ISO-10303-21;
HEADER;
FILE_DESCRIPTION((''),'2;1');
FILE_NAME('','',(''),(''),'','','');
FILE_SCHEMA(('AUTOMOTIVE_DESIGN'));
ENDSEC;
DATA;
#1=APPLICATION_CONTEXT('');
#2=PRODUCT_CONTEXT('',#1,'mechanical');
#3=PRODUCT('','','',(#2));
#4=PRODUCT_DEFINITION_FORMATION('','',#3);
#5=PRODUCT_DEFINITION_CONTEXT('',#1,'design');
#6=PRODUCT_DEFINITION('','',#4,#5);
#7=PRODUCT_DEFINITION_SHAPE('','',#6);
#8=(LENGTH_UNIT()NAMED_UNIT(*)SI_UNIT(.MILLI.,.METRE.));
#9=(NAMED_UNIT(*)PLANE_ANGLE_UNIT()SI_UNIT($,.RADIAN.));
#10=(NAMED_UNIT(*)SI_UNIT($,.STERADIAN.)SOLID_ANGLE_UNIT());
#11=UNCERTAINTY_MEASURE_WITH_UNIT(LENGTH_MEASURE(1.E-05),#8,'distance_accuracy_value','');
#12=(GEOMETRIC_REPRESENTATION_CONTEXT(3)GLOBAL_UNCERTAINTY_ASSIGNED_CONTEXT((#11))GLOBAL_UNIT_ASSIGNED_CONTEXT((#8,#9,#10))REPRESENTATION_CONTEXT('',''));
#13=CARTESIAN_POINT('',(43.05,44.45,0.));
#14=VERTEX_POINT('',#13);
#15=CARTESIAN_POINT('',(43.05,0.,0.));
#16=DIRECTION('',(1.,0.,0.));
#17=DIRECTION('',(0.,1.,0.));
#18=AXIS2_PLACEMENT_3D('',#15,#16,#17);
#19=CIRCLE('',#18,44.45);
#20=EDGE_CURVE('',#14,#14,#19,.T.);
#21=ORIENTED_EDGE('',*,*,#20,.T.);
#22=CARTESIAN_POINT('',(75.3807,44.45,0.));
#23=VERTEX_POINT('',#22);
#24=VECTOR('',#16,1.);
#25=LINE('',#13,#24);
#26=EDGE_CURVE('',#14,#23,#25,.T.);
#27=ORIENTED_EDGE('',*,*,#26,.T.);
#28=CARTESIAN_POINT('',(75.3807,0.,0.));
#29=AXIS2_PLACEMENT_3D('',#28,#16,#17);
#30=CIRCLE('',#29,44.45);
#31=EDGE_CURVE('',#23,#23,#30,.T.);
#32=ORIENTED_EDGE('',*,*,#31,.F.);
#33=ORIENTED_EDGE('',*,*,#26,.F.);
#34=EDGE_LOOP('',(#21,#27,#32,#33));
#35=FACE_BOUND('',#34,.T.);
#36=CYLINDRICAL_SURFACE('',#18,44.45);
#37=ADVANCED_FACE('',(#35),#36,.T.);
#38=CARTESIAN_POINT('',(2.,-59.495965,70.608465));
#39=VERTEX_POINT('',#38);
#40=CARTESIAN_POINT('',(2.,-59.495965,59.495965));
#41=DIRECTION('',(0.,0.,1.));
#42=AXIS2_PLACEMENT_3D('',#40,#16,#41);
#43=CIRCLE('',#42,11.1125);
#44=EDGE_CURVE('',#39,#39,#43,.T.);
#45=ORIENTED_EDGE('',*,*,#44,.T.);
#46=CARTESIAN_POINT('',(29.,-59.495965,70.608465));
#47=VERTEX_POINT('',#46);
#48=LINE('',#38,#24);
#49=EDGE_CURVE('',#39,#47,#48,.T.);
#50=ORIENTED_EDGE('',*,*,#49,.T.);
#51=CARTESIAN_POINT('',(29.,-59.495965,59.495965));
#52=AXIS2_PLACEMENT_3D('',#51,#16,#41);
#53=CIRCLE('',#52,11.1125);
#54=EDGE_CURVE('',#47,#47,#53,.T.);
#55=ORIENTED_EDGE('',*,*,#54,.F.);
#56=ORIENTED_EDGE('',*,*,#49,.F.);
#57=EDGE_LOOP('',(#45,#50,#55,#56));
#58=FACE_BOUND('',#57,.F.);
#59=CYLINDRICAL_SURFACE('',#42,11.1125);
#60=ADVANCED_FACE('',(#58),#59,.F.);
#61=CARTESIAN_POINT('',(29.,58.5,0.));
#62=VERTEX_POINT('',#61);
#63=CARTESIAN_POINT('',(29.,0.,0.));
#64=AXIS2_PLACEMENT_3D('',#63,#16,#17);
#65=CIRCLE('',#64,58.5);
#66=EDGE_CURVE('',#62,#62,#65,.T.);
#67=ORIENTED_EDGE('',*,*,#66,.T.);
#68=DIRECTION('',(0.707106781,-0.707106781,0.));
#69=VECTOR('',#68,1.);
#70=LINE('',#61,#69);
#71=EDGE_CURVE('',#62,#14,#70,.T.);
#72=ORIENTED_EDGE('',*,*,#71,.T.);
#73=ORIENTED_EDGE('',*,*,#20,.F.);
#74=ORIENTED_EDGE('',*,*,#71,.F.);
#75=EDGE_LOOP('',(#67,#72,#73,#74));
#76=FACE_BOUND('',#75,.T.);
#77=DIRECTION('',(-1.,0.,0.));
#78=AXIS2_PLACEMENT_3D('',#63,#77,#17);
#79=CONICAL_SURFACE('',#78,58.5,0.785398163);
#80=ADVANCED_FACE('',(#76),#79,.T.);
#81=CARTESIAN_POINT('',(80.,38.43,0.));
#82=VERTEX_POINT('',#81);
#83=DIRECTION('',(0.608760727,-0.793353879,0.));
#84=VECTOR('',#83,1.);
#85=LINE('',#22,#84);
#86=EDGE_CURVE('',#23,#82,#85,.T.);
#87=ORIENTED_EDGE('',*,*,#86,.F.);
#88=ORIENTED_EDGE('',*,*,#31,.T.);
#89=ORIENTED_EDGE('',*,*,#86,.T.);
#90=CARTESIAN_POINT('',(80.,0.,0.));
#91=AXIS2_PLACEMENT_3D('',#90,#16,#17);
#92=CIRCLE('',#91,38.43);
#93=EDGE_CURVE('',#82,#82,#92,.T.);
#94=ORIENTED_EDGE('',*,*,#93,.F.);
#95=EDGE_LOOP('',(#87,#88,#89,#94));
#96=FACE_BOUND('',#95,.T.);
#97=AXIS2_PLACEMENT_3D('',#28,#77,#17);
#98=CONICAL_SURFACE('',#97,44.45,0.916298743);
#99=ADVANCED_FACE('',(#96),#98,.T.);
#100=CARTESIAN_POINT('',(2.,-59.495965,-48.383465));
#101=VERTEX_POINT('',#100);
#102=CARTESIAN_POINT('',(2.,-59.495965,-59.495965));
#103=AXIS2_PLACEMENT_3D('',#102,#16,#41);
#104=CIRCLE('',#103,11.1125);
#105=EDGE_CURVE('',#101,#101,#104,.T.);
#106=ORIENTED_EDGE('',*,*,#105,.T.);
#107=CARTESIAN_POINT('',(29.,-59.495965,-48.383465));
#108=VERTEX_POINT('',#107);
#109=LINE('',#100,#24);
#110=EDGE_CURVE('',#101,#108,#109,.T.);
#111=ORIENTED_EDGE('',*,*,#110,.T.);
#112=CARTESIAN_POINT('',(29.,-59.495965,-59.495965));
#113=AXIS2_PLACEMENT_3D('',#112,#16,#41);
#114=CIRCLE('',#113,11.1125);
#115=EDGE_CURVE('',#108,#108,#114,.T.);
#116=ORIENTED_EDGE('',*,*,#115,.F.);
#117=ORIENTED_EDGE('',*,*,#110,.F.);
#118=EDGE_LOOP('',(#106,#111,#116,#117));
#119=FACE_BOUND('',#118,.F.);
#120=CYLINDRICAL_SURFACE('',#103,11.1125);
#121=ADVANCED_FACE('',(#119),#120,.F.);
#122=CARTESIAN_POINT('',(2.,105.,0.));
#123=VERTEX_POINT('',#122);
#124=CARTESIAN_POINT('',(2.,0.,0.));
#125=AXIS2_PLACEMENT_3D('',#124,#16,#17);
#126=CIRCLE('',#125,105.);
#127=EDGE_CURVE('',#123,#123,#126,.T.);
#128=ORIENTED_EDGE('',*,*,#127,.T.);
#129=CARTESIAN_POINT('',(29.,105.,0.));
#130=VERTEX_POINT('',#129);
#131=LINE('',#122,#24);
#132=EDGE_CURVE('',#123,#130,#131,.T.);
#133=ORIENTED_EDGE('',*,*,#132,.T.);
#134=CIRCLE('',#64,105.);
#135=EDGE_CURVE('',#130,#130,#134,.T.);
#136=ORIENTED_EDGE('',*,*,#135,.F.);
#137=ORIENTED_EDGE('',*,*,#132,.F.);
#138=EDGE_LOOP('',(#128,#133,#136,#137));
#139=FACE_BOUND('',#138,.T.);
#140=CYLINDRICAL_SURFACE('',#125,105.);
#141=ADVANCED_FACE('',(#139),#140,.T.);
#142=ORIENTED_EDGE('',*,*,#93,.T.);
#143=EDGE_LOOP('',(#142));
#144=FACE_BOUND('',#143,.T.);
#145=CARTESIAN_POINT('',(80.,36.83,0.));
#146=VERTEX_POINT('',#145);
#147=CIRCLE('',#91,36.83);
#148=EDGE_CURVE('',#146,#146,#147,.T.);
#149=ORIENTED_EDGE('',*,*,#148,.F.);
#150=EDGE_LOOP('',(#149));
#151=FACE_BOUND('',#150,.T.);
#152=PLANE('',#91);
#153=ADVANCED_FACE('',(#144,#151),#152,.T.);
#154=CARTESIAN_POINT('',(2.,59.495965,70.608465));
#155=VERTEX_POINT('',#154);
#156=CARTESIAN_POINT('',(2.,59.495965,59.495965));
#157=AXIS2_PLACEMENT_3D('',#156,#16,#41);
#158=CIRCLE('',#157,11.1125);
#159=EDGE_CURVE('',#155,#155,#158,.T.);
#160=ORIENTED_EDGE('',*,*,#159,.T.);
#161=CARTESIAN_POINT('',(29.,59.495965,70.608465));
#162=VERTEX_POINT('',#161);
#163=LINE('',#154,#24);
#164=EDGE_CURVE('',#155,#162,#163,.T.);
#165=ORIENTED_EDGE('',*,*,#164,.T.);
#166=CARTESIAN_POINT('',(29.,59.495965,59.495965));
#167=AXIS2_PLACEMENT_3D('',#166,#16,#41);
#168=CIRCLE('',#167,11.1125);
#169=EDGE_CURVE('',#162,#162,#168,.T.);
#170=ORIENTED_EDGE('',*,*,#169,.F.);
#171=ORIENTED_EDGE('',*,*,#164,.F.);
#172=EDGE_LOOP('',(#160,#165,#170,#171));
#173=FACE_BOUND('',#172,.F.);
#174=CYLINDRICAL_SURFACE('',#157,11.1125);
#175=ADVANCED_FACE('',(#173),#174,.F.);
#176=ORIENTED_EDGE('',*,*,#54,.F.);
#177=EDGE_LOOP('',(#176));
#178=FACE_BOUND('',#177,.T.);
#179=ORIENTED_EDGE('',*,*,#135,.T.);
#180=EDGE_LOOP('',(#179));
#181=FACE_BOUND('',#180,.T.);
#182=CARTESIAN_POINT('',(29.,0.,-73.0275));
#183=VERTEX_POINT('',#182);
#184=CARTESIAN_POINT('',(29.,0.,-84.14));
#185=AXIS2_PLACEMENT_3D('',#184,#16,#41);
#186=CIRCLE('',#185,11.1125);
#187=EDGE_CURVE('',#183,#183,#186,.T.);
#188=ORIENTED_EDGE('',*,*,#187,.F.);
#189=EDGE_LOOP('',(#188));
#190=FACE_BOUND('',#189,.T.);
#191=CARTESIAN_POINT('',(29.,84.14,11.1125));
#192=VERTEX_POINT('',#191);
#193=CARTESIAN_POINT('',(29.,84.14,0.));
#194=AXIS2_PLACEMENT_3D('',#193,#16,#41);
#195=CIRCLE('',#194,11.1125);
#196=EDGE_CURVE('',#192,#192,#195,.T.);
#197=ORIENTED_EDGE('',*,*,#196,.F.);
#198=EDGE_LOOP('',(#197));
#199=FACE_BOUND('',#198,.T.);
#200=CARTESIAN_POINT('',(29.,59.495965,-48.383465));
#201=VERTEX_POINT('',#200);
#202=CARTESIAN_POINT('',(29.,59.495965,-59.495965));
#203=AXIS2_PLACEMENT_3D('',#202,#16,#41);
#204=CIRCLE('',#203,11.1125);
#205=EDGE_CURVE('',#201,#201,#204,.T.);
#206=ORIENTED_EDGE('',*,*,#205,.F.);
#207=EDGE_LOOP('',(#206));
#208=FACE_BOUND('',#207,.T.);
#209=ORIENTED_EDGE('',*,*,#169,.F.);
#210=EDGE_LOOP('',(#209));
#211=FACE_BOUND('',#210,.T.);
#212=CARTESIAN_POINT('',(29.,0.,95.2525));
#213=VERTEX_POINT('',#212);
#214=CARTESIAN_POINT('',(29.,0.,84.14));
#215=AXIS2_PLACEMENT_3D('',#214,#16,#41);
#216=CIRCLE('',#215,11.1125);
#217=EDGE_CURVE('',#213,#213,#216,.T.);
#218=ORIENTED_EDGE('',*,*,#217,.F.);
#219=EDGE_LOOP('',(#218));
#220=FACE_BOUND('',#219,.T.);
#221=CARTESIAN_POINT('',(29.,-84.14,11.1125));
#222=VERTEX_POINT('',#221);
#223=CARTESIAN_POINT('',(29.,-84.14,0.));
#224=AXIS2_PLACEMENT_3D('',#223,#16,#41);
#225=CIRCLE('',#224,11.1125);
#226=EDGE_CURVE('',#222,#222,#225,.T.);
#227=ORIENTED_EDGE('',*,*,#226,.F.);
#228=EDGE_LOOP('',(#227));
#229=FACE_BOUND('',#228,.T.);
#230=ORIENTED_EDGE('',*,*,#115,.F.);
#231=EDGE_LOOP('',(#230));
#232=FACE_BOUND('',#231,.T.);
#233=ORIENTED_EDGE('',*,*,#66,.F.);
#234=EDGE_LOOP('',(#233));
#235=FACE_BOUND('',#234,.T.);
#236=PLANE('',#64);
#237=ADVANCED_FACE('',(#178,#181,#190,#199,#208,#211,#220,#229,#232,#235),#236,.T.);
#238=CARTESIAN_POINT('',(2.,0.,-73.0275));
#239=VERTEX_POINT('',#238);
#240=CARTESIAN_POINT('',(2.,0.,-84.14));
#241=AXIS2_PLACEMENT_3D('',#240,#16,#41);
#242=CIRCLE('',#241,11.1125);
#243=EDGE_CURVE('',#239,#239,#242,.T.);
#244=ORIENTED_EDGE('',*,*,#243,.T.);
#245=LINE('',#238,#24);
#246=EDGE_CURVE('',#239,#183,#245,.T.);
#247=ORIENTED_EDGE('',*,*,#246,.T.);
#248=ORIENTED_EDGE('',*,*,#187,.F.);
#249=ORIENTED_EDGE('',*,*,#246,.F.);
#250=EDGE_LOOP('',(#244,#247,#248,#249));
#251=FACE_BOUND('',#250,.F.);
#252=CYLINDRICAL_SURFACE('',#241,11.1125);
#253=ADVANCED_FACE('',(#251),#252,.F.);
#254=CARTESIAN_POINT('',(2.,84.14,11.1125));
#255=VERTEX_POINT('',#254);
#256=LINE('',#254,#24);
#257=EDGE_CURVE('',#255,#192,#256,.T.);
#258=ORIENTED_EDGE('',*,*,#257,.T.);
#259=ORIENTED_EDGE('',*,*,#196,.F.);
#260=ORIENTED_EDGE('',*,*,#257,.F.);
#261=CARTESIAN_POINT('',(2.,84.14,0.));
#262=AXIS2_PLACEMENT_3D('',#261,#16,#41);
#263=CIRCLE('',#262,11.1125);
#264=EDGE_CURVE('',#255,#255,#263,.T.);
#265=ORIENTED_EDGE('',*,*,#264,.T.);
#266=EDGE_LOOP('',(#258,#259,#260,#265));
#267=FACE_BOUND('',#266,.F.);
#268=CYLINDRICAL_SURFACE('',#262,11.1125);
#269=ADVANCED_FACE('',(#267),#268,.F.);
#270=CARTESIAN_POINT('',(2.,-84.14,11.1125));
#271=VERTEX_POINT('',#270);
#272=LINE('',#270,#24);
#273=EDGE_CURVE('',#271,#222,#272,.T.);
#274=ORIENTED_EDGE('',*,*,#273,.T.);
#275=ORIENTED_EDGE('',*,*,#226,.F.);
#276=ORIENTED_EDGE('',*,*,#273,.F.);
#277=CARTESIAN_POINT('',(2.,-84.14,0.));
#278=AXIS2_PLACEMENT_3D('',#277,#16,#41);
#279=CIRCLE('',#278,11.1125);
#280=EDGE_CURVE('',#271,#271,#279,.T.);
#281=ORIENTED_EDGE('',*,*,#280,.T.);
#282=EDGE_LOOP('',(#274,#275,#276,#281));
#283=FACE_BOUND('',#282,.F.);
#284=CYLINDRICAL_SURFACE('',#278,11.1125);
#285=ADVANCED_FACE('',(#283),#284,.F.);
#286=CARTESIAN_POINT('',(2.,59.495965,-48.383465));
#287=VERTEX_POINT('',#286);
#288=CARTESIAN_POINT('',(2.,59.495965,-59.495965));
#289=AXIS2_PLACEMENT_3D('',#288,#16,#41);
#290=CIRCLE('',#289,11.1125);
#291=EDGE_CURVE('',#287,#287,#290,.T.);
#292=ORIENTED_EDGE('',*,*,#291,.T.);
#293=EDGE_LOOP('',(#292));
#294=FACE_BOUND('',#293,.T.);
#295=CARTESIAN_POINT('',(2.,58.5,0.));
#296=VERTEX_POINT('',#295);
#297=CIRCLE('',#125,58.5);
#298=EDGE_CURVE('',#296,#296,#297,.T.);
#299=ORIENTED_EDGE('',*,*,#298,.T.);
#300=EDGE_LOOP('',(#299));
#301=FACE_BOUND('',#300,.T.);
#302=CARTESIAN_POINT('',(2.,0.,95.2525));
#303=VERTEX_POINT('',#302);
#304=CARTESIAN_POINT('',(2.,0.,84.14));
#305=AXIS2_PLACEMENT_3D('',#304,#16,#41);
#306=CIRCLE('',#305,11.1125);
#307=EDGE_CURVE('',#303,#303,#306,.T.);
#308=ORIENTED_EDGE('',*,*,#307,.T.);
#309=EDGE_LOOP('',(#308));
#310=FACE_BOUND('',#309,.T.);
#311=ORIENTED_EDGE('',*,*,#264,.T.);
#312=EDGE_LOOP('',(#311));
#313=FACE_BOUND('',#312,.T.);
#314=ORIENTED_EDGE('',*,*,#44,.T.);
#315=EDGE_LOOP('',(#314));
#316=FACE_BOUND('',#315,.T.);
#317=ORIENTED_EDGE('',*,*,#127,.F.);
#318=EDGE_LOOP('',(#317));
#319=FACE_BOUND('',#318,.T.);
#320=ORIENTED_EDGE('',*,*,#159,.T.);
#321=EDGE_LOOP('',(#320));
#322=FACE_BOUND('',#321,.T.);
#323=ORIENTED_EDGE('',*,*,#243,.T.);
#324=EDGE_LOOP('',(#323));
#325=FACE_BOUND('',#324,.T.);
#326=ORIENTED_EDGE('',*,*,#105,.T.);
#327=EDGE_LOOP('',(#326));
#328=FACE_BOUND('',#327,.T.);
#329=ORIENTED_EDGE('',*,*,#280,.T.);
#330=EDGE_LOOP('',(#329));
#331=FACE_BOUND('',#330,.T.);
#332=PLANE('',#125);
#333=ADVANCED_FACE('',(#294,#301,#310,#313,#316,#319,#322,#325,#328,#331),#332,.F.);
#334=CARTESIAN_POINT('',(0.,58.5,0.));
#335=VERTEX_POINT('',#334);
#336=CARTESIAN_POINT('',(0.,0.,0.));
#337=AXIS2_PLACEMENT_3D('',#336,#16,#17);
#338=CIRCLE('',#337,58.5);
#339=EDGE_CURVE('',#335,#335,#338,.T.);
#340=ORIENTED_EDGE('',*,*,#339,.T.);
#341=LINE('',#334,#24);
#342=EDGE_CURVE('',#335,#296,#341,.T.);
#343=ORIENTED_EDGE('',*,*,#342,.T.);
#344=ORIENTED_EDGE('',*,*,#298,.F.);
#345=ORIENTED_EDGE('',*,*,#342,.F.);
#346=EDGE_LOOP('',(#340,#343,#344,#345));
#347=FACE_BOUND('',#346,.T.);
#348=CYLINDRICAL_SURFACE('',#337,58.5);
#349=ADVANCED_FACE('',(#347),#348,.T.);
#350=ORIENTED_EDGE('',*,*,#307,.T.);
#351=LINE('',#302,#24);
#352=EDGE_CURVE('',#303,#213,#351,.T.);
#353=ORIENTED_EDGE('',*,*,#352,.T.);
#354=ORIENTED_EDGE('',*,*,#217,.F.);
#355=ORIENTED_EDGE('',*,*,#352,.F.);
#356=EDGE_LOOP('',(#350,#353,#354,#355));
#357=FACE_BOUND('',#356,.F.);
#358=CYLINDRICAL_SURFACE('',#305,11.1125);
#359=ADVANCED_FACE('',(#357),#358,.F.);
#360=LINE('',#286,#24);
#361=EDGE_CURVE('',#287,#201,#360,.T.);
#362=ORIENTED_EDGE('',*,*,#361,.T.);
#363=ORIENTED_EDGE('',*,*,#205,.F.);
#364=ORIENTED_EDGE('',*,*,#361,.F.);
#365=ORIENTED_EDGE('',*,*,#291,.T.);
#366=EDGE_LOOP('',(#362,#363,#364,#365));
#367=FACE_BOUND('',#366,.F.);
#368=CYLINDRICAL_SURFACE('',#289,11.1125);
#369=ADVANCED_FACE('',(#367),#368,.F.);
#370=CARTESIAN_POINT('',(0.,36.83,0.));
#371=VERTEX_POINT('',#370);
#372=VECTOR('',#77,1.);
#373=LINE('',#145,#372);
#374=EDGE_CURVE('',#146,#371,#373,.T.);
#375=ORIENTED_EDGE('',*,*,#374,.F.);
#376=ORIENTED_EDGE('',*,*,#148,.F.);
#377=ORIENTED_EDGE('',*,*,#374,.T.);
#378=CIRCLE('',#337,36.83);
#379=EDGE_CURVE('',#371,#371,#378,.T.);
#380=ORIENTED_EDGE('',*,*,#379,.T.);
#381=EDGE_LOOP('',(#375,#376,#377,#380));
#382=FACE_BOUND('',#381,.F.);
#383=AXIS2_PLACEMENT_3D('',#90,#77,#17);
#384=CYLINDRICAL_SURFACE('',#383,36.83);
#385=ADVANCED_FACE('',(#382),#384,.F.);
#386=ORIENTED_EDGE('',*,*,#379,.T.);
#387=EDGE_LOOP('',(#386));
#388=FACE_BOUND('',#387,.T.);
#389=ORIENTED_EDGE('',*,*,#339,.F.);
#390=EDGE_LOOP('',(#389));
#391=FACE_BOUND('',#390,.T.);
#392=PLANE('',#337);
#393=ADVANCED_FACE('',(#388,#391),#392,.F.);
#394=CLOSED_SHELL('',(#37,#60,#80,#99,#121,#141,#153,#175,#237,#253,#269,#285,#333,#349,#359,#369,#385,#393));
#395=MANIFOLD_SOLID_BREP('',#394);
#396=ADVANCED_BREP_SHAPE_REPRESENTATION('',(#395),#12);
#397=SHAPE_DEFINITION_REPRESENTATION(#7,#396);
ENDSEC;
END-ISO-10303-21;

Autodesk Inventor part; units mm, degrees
ref_plane "YZ Plane" through (0, 0, 0) normal (1, 0, 0) x (0, 1, 0)
ref_plane "XZ Plane" through (0, 0, 0) normal (0, 1, 0) x (-1, 0, 0)
ref_plane "XY Plane" through (0, 0, 0) normal (0, 0, 1) x (1, 0, 0)
sketch "Sketch1" plane through (0, 0, 0) normal (0, 0, 1) x (1, 0, 0)
  line L0 (0, 0) -> (109.4884, 0)
  line L1 (0, 36.83) -> (0, 58.5)
  line L2 (0, 58.5) -> (2, 58.5)
  line L3 (2, 58.5) -> (2, 105)
  line L4 (2, 105) -> (29, 105)
  line L5 (29, 105) -> (29, 58.5)
  line L6 (29, 58.5) -> (43.05, 44.45)
  line L7 (43.05, 44.45) -> (75.3807, 44.45)
  line L8 (75.3807, 44.45) -> (80, 38.43)
  line L9 (80, 38.43) -> (80, 36.83)
  line L10 (80, 36.83) -> (0, 36.83)
  point P0 (0, 47.665)
  dimension "d5" = 2
  dimension "d6" = 210
  dimension "d7" = 27
  dimension "d8" = 117
  dimension "d9" = 45
  dimension "d10" = 78
  dimension "d28" = 73.66
  dimension "d29" = 88.9
  dimension "d30" = 37.5
  dimension "d31" = 1.6
revolve "Revolution1" add sketch "Sketch1" angle 360 about axis through (0, 0, 0) along (1, 0, 0)
sketch "Sketch2" plane through (2, 0, 0) normal (-1, 0, 0) x (0, 0, 1)
  point P0 (0, 0)
  point P1 (0, 84.14)
  dimension "d12" = 84.14
hole "Hole1" at (2, 84.14, 0) direction (1, 0, 0) diameter 22.225 end up to surface
pattern_circular "Circular Pattern1" count 8 over 360 about axis through (15.5, 0, 0) along (1, 0, 0) of "Hole1"
properties part number "Flange 3 in" material "ASTM A105 Gr.B"
